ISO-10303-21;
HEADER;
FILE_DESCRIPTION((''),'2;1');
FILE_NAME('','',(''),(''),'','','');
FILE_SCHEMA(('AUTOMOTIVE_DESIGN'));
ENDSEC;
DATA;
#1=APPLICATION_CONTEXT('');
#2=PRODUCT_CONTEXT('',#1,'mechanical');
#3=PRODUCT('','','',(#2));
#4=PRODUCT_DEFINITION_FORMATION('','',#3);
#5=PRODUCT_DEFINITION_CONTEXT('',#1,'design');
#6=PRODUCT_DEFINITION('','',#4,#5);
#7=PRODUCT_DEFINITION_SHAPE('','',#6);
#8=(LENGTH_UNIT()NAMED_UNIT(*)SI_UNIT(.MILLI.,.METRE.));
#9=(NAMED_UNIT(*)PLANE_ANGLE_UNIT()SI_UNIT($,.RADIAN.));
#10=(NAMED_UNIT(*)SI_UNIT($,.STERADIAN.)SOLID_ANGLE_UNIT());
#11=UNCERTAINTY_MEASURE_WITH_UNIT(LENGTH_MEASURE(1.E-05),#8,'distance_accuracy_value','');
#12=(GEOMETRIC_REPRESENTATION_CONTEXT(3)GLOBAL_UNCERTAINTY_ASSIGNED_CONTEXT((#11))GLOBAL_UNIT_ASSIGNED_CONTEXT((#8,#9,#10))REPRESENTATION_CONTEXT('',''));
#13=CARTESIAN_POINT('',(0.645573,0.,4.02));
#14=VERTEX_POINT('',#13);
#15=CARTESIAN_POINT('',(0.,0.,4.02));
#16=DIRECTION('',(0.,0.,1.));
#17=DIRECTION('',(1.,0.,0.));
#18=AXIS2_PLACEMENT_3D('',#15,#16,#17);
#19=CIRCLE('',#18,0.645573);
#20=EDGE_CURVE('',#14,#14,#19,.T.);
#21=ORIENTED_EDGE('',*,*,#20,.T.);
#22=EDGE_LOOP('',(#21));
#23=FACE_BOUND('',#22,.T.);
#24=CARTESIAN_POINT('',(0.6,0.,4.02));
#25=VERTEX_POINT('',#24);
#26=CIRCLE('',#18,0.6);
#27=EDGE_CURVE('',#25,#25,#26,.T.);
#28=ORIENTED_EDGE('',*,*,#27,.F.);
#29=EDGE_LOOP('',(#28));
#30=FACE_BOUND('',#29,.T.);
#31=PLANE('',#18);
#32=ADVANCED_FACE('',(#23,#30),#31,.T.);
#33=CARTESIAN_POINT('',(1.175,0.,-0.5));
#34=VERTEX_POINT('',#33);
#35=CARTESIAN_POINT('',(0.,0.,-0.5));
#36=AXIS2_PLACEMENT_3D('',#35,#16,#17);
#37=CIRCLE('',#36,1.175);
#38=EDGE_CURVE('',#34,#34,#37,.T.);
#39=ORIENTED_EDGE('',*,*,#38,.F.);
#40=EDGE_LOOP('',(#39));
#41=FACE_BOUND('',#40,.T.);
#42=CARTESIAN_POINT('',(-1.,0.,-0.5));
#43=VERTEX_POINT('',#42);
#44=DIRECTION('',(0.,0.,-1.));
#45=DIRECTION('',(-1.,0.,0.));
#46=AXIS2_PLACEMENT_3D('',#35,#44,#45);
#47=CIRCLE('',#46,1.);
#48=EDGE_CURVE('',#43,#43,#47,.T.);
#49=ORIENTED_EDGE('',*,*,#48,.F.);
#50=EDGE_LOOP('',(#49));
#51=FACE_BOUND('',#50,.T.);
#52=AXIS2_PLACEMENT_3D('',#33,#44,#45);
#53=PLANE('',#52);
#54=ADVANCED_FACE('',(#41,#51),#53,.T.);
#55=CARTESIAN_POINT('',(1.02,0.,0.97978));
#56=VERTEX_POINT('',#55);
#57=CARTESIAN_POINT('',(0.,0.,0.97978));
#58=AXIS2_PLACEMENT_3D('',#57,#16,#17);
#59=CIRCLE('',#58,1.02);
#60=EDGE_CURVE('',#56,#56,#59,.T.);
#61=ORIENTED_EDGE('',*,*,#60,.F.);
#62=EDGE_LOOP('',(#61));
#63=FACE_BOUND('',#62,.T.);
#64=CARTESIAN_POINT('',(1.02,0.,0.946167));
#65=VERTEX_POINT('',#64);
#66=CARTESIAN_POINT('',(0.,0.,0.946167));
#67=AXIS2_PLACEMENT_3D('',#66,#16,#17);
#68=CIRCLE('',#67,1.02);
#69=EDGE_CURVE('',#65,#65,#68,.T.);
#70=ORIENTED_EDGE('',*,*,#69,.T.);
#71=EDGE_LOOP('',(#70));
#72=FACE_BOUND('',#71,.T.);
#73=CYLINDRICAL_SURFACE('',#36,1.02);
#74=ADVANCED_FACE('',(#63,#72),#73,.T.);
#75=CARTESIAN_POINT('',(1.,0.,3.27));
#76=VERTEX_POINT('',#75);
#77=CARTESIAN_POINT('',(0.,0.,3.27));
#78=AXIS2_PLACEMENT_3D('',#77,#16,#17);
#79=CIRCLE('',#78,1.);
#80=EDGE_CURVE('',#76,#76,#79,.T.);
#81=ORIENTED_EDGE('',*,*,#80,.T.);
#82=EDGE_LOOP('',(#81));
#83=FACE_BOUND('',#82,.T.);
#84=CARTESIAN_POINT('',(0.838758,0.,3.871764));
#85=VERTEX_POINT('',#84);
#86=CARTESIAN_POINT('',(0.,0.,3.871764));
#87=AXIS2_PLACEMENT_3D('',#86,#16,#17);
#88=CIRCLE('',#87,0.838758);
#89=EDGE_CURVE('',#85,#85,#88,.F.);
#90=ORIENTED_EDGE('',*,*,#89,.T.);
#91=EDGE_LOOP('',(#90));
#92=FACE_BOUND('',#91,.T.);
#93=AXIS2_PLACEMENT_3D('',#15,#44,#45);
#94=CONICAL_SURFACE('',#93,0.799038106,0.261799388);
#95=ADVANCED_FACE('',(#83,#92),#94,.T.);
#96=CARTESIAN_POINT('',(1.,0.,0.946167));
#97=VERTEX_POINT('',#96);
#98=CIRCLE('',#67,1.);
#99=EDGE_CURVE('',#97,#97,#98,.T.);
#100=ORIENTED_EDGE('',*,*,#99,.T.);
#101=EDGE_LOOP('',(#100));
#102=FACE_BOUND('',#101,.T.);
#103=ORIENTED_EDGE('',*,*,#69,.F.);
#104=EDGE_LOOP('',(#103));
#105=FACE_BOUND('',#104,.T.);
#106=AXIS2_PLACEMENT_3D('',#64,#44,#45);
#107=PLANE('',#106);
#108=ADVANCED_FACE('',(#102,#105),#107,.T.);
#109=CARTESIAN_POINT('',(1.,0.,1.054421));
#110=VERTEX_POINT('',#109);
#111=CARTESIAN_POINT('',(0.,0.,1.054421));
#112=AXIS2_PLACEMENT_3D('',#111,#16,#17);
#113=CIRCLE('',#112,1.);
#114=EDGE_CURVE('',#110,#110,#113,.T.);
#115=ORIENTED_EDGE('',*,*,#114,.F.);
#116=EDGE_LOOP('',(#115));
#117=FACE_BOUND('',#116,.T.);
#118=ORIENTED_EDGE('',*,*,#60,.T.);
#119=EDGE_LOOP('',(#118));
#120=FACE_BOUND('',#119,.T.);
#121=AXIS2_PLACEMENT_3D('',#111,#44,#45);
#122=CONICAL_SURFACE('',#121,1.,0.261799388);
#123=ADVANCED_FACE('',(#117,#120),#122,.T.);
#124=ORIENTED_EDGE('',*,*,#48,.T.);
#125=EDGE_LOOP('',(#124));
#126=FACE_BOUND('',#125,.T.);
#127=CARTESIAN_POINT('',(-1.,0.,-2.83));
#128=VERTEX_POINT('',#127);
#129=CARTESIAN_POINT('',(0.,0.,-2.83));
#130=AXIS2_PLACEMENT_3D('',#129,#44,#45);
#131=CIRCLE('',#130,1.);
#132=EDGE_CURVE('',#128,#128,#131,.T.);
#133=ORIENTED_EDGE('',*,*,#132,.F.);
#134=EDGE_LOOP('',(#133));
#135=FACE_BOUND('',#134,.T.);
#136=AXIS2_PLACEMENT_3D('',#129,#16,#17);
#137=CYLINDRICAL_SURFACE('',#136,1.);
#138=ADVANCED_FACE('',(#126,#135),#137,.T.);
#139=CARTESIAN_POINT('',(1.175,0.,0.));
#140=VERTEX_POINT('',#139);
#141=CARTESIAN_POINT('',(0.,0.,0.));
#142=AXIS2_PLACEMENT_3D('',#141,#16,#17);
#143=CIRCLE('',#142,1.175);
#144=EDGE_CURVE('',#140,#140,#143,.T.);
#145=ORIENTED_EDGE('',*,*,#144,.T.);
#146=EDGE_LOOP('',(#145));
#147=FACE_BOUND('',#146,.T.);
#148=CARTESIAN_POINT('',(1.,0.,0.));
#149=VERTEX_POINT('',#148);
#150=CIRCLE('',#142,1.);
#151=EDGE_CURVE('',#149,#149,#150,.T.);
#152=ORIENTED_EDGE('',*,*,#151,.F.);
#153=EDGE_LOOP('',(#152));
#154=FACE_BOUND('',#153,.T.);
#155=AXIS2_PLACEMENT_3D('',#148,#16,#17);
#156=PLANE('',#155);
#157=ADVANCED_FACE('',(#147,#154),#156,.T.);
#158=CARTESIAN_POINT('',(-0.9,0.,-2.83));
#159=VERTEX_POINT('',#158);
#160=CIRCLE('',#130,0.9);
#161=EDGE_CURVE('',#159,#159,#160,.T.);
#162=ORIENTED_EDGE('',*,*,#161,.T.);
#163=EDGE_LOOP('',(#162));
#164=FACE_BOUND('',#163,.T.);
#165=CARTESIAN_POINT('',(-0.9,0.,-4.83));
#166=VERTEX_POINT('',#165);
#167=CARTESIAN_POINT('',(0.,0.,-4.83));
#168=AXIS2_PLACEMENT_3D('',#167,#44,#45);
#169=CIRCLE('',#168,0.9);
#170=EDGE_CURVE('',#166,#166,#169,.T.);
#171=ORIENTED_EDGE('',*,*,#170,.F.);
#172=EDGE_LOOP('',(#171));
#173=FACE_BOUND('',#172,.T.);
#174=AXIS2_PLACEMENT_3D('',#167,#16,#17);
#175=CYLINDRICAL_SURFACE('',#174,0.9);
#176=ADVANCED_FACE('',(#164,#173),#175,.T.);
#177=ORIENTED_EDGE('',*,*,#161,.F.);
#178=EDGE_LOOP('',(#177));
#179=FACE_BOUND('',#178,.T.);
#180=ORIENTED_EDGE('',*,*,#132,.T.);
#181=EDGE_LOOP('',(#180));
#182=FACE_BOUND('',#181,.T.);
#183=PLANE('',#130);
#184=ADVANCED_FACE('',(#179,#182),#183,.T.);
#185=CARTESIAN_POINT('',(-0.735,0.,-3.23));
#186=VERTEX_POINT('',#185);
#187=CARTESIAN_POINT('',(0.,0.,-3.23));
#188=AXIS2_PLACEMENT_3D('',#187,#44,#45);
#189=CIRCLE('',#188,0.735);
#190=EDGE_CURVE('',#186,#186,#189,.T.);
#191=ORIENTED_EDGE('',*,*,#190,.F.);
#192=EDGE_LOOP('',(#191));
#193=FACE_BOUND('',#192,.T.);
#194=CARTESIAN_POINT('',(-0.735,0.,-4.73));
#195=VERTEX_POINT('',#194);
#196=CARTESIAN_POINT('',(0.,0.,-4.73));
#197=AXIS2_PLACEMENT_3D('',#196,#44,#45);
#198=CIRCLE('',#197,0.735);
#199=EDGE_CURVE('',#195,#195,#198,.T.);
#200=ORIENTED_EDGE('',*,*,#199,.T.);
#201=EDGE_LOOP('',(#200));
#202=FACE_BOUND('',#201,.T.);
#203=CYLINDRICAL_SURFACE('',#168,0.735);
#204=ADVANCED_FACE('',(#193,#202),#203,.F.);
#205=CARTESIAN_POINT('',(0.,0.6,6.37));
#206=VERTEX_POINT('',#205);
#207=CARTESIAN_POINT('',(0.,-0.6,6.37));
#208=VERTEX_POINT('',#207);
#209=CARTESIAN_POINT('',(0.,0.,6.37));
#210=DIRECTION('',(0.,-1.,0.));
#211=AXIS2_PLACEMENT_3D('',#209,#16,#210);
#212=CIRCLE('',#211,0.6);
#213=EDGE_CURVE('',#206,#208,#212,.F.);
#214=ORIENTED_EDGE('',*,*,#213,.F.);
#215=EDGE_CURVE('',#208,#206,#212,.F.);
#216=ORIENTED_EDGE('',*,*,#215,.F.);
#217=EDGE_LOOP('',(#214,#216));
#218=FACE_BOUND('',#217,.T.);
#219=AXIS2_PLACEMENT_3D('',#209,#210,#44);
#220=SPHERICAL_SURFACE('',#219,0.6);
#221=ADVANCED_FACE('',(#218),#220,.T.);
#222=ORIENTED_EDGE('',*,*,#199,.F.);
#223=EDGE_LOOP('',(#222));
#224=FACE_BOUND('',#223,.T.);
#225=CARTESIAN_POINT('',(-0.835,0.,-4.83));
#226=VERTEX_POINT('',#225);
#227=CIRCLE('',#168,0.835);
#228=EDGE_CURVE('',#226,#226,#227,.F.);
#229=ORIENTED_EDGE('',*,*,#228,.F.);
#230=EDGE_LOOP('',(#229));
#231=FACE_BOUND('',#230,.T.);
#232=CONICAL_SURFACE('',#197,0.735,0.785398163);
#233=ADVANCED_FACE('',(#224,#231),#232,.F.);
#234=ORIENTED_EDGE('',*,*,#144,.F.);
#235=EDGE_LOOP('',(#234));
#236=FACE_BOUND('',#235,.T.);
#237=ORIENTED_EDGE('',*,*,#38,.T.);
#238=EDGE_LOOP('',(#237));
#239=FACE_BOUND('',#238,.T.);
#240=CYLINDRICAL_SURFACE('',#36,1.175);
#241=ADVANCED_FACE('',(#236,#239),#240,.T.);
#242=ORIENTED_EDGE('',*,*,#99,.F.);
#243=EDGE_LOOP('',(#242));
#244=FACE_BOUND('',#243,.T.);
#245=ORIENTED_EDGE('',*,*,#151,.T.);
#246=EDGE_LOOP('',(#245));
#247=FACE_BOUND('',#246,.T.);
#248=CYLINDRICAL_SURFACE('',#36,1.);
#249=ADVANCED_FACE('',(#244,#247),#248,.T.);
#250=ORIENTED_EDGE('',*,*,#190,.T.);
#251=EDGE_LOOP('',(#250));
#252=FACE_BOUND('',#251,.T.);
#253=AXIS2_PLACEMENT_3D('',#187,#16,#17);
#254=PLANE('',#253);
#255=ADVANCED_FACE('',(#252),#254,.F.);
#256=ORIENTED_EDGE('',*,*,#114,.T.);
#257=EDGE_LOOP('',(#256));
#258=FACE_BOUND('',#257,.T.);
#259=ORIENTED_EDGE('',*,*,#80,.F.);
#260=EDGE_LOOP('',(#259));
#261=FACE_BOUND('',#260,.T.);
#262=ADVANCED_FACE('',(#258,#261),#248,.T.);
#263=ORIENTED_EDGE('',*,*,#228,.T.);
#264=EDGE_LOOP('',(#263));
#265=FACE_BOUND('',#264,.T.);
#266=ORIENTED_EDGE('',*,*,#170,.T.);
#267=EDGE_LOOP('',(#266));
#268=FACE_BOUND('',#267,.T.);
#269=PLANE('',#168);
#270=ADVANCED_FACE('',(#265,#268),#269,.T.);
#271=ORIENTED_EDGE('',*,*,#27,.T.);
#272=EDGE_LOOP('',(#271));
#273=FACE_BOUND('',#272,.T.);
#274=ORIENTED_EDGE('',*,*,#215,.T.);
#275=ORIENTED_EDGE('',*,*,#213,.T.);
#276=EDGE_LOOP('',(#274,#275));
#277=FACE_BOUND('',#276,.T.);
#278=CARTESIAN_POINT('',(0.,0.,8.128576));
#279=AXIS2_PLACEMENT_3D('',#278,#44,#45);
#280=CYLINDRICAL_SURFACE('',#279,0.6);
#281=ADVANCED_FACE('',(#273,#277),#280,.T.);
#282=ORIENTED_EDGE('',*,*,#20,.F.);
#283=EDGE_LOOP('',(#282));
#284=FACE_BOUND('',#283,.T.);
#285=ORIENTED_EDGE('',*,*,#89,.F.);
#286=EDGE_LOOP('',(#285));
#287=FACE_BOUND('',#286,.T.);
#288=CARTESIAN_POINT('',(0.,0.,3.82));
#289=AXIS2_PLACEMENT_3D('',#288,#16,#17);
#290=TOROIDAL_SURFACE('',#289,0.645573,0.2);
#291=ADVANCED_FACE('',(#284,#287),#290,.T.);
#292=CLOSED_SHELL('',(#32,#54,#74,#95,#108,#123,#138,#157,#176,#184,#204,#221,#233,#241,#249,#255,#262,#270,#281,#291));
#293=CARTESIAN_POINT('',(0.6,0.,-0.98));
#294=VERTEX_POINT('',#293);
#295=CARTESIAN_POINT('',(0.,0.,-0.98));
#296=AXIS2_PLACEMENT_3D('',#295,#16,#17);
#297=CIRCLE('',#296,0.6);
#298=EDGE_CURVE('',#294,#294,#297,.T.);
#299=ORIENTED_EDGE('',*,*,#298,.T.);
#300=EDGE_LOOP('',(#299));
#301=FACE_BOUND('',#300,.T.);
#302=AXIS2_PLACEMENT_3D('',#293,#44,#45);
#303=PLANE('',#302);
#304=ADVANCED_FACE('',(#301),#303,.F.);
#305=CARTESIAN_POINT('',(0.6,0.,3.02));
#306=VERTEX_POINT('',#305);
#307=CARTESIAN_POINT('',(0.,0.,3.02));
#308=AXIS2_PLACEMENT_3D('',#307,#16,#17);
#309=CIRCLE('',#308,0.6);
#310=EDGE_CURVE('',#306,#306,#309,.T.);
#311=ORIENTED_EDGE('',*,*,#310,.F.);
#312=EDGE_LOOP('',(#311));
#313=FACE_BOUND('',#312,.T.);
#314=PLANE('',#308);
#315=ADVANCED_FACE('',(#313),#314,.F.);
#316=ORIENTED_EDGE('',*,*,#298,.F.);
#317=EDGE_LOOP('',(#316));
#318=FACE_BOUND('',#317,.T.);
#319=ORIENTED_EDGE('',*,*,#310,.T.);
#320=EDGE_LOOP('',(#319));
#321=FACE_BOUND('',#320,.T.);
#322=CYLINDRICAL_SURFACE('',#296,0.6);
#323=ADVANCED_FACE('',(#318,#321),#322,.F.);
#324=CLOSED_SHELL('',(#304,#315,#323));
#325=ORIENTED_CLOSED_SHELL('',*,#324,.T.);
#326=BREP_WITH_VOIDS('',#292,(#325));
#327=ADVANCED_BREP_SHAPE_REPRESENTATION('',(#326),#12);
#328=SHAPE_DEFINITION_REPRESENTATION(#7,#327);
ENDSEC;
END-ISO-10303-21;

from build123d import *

# Parameters (mm, degrees)
BOSS_EXTRU_2_START = 2.33
ESQUISSE3_R        = 1
BOSS_EXTRU_2_DEPTH = 2.33
ESQUISSE4_R        = 0.9
BOSS_EXTRU_3_DEPTH = 2
ESQUISSE5_W        = 0.6
ESQUISSE5_H        = 4
PER_AGE1_D         = 1.47
PER_AGE1_DEPTH     = 1.6
CHANFREIN1_SIZE    = 0.1
CONG_1_R           = 0.2


# Read off the part's stored shape, not the designer's step: Boss.-Extru.1
with BuildPart() as part:
    # Esquisse1 → Révolution1 (revolve)
    with BuildSketch(Plane(origin=(0, 0, 0), x_dir=(1, 0, 0), z_dir=(0, 1, 0))):
        Polygon((1.175, 0.5), (0, 0.5), (0, -4.02), (0.799038106, -4.02), (1, -3.27), (1, -1.054421399), (1.02, -0.979780383), (1.02, -0.946167323), (1, -0.946167323), (1, 0), (1.175, 0), align=None)
    revolve(axis=Axis((0, 0, -0.5), (0, 0, 1)))

    # Boss.-Extru.1 outline → Boss.-Extru.1 (revolve)
    with BuildSketch(Plane.XZ):
        with BuildLine():
            Line((0.6, 4.02), (0.6, 6.37))
            ThreePointArc((0.6, 6.37), (0.424264069, 6.794264069), (0, 6.97))
            Line((0, 6.97), (0, 4.02))
            Line((0, 4.02), (0.6, 4.02))
        make_face()
    revolve(axis=Axis((0, 0, 0), (0, 0, 1)))

    # Esquisse3 → Boss.-Extru.2 (add)
    with BuildSketch(Plane(origin=(0, 0, -0.5), x_dir=(-1, 0, 0), z_dir=(0, 0, -1)).offset(BOSS_EXTRU_2_START)):
        with Locations(Location((0, 0, 0), (0, 0, 180))):
            Circle(ESQUISSE3_R)
    extrude(amount=-BOSS_EXTRU_2_DEPTH)

    # Esquisse4 → Boss.-Extru.3 (add)
    with BuildSketch(Plane(origin=(0, 0, -2.83), x_dir=(-1, 0, 0), z_dir=(0, 0, -1))):
        Circle(ESQUISSE4_R)
    extrude(amount=BOSS_EXTRU_3_DEPTH)

    # Esquisse5 → Enlèvement de matière-Révolution1 (revolve, cut)
    with BuildSketch(Plane(origin=(0, 0, 0), x_dir=(1, 0, 0), z_dir=(0, 1, 0)), mode=Mode.PRIVATE) as enl_vement_de_mati_re_r_volution1_sk:
        with Locations((0.3, -1.02)):
            Rectangle(ESQUISSE5_W, ESQUISSE5_H)
    revolve(enl_vement_de_mati_re_r_volution1_sk.sketch.rotate(Axis((0, 0, -0.98), (0, 0, 1)), 90), axis=Axis((0, 0, -0.98), (0, 0, 1)), mode=Mode.SUBTRACT)

    # Perçage1
    with Locations(Plane(origin=(0, 0, -4.83), x_dir=(-1, 0, 0), z_dir=(0, 0, -1))):
        with Locations((0, 0)):
            Hole(PER_AGE1_D / 2, depth=PER_AGE1_DEPTH)

    # Chanfrein1
    chanfrein1_edges = [part.edges().sort_by_distance(p)[0] for p in [
        (-0.735, 0, -4.83),
    ]]
    chamfer(chanfrein1_edges, length=CHANFREIN1_SIZE)

    # Congé1
    cong_1_edges = [part.edges().sort_by_distance(p)[0] for p in [
        (-0.799038106, 0, 4.02),
    ]]
    fillet(cong_1_edges, radius=CONG_1_R)


solid = part.part
